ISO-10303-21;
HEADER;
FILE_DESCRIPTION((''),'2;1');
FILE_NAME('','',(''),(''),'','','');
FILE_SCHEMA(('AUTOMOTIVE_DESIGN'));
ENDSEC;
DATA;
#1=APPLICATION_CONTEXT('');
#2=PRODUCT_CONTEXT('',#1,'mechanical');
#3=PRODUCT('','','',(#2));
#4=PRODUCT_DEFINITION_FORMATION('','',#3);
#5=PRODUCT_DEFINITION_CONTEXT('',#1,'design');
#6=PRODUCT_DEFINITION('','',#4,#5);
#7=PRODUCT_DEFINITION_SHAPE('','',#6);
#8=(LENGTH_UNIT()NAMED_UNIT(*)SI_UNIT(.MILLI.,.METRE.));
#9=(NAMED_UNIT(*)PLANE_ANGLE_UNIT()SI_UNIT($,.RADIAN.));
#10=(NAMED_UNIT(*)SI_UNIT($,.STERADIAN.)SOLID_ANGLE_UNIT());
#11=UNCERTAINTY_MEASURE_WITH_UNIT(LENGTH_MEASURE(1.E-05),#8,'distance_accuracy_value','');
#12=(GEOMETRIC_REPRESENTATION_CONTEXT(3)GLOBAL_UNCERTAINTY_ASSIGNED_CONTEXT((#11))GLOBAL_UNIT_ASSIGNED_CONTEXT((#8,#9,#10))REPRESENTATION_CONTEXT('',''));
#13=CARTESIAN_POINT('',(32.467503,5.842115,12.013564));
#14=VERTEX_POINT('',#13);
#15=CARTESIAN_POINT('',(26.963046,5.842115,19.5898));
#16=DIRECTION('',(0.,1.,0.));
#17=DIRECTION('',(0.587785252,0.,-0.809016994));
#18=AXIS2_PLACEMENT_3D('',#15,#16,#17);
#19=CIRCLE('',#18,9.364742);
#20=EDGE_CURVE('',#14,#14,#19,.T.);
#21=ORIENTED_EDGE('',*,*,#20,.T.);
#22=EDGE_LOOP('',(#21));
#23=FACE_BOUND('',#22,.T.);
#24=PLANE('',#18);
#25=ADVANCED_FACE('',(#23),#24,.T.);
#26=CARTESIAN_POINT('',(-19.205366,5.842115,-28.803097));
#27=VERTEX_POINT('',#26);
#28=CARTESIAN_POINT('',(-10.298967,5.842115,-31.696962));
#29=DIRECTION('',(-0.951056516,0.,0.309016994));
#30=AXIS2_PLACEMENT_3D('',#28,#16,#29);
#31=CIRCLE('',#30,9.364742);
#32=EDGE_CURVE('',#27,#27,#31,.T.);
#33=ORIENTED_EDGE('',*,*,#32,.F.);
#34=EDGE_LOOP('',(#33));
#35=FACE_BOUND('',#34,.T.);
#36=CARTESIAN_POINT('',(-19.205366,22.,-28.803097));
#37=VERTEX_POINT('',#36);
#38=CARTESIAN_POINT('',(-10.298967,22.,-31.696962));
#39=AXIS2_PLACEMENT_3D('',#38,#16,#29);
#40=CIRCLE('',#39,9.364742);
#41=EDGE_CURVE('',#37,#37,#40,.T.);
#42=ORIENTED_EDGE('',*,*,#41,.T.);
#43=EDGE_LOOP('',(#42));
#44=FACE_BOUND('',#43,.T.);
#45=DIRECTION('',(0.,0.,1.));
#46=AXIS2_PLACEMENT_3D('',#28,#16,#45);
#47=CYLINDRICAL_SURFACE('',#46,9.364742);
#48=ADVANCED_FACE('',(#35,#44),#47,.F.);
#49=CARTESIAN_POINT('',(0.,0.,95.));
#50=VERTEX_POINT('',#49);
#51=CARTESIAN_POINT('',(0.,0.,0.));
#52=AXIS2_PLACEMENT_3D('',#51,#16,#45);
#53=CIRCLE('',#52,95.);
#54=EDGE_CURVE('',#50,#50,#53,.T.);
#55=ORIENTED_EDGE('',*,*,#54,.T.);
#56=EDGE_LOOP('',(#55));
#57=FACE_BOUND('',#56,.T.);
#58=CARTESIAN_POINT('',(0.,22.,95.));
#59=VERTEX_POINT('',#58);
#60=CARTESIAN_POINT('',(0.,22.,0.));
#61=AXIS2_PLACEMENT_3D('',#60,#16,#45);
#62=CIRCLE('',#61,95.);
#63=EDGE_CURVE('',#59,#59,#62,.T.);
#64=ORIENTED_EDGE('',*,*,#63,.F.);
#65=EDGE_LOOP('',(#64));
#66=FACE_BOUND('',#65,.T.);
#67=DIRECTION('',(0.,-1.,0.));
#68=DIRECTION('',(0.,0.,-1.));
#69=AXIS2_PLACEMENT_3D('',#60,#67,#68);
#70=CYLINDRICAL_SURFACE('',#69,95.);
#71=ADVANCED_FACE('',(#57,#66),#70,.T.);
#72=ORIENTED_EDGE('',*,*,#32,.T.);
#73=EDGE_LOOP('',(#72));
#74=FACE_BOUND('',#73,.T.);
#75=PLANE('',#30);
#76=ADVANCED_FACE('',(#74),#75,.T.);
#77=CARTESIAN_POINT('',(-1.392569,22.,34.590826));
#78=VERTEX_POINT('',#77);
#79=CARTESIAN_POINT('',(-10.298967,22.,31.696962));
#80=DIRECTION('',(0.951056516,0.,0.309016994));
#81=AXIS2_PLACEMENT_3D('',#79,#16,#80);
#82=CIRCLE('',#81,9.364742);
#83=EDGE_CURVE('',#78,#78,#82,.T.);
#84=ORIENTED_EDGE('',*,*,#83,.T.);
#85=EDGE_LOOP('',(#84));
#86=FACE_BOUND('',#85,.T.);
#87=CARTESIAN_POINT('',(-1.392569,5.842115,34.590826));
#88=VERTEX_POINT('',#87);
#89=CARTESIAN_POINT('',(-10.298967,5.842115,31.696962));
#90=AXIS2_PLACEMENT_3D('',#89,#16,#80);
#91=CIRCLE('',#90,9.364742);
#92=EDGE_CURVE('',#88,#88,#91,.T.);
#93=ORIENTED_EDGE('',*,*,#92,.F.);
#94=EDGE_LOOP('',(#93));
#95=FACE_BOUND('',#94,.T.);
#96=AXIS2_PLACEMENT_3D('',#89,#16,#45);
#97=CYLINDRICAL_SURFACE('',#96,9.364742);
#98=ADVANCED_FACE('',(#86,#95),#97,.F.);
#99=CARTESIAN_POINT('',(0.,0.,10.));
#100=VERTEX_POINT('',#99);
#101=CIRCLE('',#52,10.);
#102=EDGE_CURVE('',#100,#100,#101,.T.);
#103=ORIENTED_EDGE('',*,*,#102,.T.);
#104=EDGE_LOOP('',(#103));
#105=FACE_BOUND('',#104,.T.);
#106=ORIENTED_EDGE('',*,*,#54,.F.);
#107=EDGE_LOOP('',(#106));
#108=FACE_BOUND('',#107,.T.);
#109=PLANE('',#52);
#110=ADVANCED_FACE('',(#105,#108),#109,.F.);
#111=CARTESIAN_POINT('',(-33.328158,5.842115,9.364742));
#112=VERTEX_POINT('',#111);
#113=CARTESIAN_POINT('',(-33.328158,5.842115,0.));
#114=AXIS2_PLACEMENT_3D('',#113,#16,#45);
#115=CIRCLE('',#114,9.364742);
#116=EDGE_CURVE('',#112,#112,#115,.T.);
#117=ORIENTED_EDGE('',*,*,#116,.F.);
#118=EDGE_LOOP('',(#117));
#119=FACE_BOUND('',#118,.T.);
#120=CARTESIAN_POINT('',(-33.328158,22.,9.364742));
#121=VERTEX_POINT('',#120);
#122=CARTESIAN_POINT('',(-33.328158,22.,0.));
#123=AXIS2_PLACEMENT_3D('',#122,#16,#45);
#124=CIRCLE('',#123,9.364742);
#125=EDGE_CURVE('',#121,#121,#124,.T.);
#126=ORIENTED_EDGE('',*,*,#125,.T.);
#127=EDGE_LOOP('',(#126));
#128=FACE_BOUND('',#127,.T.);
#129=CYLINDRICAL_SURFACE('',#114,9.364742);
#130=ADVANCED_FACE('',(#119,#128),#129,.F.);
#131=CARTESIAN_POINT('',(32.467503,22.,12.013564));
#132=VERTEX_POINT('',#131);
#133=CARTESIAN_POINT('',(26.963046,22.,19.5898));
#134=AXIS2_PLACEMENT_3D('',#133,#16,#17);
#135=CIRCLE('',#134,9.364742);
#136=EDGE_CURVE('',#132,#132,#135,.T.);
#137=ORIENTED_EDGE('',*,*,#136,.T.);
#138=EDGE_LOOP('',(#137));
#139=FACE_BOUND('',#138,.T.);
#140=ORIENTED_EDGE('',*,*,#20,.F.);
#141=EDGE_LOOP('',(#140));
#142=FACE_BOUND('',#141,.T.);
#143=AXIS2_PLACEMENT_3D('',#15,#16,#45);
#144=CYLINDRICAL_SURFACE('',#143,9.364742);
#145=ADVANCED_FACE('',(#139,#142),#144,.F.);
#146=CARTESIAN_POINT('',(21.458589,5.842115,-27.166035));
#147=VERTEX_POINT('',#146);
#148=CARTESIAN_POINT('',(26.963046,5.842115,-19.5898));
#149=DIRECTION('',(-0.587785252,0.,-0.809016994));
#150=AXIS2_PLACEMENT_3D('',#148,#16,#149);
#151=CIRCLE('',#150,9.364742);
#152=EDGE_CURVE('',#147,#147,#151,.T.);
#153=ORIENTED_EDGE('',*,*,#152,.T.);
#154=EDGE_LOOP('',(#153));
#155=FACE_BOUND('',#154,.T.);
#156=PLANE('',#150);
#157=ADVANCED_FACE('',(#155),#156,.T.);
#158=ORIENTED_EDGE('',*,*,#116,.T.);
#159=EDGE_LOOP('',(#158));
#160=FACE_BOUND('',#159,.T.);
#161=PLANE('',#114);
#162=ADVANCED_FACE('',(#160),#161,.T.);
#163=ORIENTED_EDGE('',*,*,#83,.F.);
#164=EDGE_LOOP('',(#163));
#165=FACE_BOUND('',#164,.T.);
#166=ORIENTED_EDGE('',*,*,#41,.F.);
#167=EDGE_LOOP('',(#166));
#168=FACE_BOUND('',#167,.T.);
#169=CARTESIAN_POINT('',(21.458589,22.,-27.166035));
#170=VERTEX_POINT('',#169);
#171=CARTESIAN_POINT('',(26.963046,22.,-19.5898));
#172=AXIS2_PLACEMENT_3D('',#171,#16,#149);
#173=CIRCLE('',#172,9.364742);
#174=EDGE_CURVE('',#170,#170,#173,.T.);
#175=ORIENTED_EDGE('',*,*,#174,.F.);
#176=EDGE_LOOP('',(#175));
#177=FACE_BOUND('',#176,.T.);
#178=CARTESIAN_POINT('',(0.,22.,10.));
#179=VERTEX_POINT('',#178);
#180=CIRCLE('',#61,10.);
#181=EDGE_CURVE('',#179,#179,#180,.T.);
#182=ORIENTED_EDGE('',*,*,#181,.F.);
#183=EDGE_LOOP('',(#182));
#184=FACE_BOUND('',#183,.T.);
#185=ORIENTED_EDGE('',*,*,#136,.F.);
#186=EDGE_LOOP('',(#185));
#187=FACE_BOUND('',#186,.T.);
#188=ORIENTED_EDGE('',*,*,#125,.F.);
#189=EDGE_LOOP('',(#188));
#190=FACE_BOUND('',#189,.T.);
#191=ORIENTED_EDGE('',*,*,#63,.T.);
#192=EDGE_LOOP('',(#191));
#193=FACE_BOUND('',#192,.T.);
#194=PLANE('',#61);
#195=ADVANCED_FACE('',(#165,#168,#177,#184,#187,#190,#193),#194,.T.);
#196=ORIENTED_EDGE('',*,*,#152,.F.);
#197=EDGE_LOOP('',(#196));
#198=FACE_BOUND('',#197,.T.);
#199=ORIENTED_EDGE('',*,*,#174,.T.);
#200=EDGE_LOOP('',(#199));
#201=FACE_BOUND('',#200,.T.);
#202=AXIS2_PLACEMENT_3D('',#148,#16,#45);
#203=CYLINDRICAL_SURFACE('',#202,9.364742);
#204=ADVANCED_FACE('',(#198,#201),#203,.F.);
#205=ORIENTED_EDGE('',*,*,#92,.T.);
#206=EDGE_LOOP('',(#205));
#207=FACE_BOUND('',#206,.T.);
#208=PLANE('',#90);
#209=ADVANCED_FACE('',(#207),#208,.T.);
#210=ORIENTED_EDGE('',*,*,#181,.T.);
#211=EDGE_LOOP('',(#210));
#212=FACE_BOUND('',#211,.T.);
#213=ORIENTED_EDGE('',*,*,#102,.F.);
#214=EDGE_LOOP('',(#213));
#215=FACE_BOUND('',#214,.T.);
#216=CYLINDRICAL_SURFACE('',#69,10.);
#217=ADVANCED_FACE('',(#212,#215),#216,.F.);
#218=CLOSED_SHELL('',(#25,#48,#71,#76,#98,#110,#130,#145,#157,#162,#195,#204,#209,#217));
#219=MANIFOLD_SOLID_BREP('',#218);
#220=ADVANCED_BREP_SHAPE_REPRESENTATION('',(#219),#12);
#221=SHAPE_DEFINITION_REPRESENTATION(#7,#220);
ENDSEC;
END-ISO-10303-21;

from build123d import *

# Parameters (mm, degrees)
SKETCH1_R           = 95
BOSS_EXTRUDE1_DEPTH = 22
SKETCH2_R           = 10
CUT_EXTRUDE1_DEPTH  = 137.1396342
SKETCH3_R           = 9.364741657
CUT_EXTRUDE2_DEPTH  = 16.157884927
CIRPATTERN1_COUNT   = 5


with BuildPart() as part:
    # Sketch1 → Boss-Extrude1 (new body)
    with BuildSketch(Plane(origin=(0, 0, 0), x_dir=(1, 0, 0), z_dir=(0, 1, 0))):
        Circle(SKETCH1_R)
    extrude(amount=BOSS_EXTRUDE1_DEPTH)

    # Sketch2 → Cut-Extrude1 (cut, through all)
    with BuildSketch(Plane(origin=(0, 0, 0), x_dir=(1, 0, 0), z_dir=(0, 1, 0))):
        Circle(SKETCH2_R)
    extrude(amount=CUT_EXTRUDE1_DEPTH, mode=Mode.SUBTRACT)

    # Sketch3 → Cut-Extrude2 (cut)
    with BuildSketch(Plane(origin=(0, 22, 0), x_dir=(1, 0, 0), z_dir=(0, 1, 0))):
        with Locations((-33.328157692, 0)):
            Circle(SKETCH3_R)
    cut_extrude2 = extrude(amount=-CUT_EXTRUDE2_DEPTH, mode=Mode.SUBTRACT)

    # CirPattern1: Cut-Extrude2 ×5 about axis
    cirpattern1_axis = Axis((0, 0, 0), (0, 1, 0))
    for i in range(1, CIRPATTERN1_COUNT):
        add(cut_extrude2.rotate(cirpattern1_axis, i * 360 / CIRPATTERN1_COUNT), mode=Mode.SUBTRACT)


solid = part.part
